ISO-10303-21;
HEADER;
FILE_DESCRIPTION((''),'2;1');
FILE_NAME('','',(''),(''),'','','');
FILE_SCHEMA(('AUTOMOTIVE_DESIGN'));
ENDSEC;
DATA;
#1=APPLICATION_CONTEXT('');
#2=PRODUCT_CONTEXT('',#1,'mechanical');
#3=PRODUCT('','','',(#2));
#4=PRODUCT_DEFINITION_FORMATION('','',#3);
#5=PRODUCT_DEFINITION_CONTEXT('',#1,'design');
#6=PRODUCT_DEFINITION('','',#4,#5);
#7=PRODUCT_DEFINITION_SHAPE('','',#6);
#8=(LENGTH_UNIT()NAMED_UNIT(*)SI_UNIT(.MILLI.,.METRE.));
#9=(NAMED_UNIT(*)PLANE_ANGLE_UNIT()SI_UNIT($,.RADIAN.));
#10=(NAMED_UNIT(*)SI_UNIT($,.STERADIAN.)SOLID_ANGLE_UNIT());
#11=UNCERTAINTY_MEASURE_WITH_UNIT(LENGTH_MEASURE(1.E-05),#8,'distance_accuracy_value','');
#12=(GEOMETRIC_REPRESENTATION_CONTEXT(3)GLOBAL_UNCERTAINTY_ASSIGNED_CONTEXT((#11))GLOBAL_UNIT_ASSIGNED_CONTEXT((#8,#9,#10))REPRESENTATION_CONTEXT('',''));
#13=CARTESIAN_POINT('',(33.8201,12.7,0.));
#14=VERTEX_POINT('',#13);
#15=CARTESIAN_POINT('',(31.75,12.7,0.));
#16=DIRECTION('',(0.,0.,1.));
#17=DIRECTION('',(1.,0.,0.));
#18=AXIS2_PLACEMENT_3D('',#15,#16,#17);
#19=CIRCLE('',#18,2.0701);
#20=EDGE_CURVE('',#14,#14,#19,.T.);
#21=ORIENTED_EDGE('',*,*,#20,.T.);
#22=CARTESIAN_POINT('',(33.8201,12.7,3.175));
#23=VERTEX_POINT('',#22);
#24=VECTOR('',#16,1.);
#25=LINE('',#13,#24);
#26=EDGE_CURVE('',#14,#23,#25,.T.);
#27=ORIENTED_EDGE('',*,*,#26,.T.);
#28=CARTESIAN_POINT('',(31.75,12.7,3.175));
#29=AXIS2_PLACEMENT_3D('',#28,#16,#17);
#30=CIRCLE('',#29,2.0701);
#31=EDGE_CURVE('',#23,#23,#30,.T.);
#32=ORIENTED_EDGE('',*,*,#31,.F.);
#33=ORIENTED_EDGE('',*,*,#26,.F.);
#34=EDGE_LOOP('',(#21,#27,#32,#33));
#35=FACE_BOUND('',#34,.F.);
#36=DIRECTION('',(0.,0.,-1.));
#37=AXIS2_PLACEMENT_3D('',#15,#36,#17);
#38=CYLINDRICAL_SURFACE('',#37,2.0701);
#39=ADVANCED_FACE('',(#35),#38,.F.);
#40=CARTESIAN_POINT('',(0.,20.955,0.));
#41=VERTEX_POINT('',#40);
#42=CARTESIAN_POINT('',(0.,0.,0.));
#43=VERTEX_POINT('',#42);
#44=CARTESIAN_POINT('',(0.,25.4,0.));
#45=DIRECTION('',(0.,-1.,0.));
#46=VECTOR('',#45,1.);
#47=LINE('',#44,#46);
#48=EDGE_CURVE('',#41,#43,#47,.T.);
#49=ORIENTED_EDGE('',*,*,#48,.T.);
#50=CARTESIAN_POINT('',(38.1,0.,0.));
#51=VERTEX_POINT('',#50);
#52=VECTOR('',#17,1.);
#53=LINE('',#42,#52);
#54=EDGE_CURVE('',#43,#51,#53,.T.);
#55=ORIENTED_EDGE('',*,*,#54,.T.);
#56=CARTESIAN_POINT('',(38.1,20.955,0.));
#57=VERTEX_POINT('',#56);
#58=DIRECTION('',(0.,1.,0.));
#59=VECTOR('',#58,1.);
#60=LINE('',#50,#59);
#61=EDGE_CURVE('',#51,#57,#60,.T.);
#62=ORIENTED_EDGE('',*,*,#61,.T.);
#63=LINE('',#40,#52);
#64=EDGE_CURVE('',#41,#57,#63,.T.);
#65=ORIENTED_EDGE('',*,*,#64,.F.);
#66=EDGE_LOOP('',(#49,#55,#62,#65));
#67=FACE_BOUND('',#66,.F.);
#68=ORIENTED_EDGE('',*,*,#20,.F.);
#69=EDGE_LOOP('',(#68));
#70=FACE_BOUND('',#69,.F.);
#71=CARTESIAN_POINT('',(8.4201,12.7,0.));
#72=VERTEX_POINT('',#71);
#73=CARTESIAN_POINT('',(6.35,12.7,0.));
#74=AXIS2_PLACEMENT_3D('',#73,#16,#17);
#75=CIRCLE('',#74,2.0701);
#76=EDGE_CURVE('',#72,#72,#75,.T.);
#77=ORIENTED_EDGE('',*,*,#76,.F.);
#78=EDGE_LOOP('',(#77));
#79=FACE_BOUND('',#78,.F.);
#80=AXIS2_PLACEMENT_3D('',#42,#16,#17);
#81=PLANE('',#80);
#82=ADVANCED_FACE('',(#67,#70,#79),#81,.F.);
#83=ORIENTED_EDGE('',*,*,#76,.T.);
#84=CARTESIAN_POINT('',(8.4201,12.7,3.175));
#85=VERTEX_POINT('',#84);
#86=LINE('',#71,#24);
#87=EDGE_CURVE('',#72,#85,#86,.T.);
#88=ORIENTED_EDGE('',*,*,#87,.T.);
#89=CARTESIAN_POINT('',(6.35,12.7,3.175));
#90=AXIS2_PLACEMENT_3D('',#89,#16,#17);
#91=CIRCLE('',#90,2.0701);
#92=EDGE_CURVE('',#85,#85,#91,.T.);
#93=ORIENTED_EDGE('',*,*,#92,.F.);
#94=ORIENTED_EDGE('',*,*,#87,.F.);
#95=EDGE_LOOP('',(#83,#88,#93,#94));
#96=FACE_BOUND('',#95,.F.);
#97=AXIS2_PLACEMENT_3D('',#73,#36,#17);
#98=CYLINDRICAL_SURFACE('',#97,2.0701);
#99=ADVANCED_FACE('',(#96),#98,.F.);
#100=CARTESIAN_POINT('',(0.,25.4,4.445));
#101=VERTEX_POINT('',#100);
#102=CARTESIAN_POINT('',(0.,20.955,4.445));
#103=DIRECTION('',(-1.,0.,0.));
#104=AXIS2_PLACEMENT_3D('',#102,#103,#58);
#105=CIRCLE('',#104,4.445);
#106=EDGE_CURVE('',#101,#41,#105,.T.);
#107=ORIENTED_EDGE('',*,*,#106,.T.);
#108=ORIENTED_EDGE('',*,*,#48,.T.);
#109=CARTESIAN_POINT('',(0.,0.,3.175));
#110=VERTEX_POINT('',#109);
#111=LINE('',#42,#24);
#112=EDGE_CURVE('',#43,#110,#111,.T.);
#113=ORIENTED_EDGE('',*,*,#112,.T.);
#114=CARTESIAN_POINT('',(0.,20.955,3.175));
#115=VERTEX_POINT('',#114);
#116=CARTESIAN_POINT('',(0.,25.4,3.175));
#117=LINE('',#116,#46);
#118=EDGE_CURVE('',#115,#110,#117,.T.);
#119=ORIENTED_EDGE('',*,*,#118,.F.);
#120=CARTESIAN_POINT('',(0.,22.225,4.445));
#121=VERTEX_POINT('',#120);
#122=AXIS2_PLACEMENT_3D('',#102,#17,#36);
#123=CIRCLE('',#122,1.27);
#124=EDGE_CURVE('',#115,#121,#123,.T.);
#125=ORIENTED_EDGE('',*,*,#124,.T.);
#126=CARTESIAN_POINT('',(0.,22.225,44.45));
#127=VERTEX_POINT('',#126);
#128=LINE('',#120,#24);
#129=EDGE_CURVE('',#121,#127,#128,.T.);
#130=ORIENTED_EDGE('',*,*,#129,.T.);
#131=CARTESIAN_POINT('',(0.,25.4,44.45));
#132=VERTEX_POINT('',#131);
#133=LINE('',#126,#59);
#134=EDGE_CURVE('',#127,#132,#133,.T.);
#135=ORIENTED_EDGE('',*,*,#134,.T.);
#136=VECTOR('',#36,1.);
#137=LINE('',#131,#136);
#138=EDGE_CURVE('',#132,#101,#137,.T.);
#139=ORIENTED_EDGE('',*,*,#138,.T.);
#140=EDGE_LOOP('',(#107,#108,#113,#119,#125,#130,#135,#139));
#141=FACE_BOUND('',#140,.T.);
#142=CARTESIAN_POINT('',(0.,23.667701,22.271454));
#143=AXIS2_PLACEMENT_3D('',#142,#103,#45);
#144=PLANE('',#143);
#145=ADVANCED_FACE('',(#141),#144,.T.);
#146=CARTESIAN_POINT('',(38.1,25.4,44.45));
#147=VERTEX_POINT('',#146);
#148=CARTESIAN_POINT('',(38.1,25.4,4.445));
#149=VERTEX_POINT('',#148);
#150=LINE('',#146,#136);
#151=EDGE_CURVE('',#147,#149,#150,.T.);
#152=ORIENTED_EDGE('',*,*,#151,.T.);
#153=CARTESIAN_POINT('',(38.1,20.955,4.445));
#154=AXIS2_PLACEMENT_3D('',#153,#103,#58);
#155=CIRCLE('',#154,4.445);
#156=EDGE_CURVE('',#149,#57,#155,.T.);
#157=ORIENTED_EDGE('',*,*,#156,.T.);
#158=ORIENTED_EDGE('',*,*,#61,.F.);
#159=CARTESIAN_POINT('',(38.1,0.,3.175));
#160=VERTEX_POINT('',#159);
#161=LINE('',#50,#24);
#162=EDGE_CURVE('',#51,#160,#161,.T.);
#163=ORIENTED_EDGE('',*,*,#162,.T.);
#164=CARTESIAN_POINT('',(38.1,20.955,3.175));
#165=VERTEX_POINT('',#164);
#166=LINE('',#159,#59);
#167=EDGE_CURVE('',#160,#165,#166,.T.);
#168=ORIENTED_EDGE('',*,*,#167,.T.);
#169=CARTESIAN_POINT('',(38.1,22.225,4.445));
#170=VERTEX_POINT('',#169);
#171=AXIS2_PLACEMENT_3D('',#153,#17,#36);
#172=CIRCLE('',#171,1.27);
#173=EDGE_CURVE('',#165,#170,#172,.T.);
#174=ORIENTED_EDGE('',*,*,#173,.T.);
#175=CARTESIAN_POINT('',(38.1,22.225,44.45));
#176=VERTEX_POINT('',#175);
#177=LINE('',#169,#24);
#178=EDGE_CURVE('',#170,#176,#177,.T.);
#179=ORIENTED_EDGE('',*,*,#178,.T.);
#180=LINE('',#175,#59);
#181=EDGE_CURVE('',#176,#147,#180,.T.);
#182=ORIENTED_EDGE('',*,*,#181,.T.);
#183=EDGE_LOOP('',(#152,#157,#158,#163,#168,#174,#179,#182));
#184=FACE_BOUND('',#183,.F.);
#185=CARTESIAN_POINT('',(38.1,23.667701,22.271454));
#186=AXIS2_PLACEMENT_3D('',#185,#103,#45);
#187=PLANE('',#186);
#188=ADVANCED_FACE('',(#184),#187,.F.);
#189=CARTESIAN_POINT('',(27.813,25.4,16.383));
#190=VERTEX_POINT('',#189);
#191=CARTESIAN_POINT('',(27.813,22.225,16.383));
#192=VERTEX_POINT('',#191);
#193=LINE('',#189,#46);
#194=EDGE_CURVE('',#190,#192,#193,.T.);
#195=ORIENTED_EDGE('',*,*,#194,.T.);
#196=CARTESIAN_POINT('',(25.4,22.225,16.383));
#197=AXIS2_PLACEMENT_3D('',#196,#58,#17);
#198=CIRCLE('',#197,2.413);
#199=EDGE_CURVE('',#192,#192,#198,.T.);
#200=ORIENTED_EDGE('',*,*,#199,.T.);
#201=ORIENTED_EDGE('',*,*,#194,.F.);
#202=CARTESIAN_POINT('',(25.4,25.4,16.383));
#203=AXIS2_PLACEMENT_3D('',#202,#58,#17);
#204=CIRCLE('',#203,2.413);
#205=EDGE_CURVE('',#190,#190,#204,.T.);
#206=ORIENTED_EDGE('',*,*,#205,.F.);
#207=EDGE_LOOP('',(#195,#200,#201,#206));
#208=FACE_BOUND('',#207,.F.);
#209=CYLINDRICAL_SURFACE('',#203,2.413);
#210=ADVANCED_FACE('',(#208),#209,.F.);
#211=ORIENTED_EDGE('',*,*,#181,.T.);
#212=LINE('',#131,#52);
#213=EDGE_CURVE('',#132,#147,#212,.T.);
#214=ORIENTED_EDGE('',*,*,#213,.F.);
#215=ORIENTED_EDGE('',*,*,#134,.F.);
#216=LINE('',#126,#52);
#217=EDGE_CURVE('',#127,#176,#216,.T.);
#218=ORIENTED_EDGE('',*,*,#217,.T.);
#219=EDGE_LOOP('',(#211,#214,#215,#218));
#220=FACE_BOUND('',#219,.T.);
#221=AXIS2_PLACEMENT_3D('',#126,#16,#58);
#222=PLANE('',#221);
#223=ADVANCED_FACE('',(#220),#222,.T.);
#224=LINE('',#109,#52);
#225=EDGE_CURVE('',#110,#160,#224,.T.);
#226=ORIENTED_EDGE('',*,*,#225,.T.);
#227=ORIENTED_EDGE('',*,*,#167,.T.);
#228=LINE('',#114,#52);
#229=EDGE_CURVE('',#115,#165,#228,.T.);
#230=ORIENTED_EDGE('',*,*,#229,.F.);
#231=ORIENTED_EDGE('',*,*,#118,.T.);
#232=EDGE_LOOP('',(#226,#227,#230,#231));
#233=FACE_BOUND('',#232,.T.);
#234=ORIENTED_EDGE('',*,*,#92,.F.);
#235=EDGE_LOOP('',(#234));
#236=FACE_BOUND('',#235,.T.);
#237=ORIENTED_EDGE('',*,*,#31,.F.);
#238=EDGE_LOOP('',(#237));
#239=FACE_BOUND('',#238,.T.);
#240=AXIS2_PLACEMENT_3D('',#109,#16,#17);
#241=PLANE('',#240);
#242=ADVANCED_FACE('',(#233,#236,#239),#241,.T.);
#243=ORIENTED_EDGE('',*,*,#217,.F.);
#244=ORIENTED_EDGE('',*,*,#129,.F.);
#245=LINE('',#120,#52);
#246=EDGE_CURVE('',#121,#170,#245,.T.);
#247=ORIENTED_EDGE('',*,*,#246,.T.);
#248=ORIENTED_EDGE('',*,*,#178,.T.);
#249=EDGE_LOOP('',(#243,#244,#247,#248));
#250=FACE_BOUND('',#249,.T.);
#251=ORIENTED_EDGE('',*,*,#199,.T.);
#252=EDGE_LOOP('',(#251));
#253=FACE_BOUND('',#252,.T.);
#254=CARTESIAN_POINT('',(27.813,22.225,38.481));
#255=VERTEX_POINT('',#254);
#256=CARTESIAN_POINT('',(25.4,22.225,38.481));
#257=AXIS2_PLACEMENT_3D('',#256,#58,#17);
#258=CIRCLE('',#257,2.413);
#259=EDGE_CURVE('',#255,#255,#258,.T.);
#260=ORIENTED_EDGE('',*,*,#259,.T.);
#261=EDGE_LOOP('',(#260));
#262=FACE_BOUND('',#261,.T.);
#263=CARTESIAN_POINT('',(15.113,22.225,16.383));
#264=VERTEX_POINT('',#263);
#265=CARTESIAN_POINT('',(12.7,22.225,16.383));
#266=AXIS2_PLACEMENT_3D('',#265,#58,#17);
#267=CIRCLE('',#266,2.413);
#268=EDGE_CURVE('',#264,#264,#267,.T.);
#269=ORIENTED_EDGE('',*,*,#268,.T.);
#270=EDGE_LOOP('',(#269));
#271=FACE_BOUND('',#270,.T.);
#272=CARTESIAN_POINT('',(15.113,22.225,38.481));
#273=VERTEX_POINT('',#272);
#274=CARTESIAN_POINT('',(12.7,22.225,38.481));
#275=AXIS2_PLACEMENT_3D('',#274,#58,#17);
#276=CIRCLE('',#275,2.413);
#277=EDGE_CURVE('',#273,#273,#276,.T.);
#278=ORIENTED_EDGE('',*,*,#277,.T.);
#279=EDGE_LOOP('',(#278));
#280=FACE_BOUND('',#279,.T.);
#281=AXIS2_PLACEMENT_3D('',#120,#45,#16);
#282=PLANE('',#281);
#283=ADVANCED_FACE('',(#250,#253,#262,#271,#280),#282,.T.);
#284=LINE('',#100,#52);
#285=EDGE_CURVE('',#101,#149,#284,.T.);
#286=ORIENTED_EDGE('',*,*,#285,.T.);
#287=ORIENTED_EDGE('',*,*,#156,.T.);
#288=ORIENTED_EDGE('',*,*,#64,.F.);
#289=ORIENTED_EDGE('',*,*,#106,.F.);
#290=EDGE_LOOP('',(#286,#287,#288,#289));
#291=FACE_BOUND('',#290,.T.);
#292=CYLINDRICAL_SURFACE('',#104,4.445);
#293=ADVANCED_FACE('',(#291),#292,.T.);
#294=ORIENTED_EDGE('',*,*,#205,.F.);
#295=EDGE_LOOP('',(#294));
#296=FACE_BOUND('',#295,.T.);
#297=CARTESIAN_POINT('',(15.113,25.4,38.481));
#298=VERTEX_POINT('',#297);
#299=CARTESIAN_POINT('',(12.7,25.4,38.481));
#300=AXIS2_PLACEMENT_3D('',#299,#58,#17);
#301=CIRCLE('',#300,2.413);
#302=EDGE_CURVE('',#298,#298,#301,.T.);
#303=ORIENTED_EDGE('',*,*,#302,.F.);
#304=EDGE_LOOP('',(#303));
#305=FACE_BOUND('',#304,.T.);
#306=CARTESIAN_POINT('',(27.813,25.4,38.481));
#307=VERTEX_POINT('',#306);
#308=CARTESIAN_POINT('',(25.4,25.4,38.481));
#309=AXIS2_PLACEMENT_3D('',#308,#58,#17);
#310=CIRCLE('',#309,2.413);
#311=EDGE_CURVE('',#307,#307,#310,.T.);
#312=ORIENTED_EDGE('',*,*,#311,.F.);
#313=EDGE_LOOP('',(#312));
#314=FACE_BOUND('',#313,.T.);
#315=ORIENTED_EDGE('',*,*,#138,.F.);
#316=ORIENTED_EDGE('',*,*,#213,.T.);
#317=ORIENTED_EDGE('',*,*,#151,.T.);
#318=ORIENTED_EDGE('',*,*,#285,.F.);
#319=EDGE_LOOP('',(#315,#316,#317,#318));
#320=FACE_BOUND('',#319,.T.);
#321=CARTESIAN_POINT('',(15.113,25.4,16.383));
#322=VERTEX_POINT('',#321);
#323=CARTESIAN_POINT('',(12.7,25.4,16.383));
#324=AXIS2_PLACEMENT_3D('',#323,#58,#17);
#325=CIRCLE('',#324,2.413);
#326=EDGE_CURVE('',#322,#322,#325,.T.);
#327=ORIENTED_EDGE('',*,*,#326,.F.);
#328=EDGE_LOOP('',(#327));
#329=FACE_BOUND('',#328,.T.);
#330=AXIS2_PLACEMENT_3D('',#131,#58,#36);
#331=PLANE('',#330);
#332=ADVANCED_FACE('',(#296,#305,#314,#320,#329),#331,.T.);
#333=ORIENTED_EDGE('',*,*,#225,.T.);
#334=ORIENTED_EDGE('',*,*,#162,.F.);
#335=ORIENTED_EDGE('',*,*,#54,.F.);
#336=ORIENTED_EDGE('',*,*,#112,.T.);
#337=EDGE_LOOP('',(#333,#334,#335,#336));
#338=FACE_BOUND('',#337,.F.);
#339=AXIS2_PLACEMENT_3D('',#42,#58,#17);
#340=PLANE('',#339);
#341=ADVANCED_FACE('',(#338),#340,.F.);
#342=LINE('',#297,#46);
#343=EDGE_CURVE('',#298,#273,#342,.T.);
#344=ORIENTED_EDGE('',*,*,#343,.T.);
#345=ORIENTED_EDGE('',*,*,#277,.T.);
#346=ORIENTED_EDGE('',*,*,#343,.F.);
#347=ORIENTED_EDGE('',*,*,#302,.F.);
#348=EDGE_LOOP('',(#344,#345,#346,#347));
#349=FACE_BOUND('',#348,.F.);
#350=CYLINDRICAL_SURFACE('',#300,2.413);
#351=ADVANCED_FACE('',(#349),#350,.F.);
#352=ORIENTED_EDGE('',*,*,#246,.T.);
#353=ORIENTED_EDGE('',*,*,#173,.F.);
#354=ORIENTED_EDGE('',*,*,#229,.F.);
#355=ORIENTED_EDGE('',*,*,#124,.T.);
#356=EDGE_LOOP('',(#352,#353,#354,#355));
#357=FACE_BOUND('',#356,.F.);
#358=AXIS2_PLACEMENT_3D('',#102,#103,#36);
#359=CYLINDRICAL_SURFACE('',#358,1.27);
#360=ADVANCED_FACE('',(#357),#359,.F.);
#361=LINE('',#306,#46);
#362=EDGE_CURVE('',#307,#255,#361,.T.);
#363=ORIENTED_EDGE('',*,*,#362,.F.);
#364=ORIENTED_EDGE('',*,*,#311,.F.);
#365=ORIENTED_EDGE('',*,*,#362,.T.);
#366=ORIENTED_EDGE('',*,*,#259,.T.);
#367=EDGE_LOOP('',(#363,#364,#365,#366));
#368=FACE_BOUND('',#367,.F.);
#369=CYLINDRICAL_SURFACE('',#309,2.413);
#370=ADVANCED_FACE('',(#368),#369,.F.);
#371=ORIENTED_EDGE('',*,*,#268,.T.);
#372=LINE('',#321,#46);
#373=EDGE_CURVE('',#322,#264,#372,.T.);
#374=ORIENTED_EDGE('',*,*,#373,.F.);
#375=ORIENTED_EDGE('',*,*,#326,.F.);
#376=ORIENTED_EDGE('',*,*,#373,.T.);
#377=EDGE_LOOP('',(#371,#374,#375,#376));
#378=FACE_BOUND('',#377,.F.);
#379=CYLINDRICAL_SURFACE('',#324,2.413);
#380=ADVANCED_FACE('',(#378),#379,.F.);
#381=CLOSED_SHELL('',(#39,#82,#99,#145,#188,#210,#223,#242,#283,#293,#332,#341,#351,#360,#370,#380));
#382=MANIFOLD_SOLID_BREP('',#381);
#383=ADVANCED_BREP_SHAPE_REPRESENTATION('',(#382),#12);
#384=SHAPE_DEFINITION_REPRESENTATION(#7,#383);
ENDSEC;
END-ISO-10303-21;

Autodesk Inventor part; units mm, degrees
ref_plane "YZ Plane" through (0, 0, 0) normal (1, 0, 0) x (0, 1, 0)
ref_plane "XZ Plane" through (0, 0, 0) normal (0, 1, 0) x (-1, 0, 0)
ref_plane "XY Plane" through (0, 0, 0) normal (0, 0, 1) x (1, 0, 0)
sketch "Sketch1" plane through (0, 0, 0) normal (0, 0, 1) x (1, 0, 0)
  line L0 (0, 0) -> (38.1, 0)
  line L1 (38.1, 0) -> (38.1, 25.4)
  line L2 (38.1, 25.4) -> (0, 25.4)
  line L3 (0, 25.4) -> (0, 0)
  circle A0 centre (6.35, 12.7) radius 2.0701
  circle A1 centre (31.75, 12.7) radius 2.0701
  dimension "d0" = 38.1
  dimension "d1" = 25.4
  dimension "d2" = 4.1402
  dimension "d3" = 12.7
  dimension "d4" = 6.35
  dimension "d7" = 25.4
extrude "Plate1" add sketch "Sketch1" along normal blind 3.175
sketch "Sketch2" plane through (0, 22.225, 0) normal (0, 1, 0) x (-1, 0, 0)
  line L0 (-38.1, 0) -> (0, 0)
  line L1 (0, 0) -> (0, 44.45)
  line L2 (0, 44.45) -> (-38.1, 44.45)
  line L3 (-38.1, 44.45) -> (-38.1, 0)
edge flange "Flange1" height 44.45 angle 90 thickness 3.175 bend radius 1.27 thickness toward (0, 1, 0) relief tear relief width 3.175 relief depth 1.5875 edges at (19.05, 25.4, 3.175) wall of the first edge with corners at (38.1, 22.225, 0) (0, 22.225, 0) (0, 22.225, 44.45) (38.1, 22.225, 44.45)
bend "Bend1"
corner "Corner1"
sketch "Sketch3" plane through (0, 25.4, 44.45) normal (0, 1, 0) x (1, 0, 0)
  line L0 (38.1, 40.005) -> (0, 40.005) projected
  line L1 (38.1, 40.005) -> (38.1, 0) projected
  line L2 (28.575, 33.655) -> (9.525, 33.655) construction
  line L3 (9.525, 33.655) -> (9.525, 0.381) construction
  line L4 (9.525, 0.381) -> (28.575, 0.381) construction
  line L5 (28.575, 0.381) -> (28.575, 33.655) construction
  line L6 (28.575, 5.969) -> (9.525, 5.969) construction
  circle A0 centre (25.4, 5.969) radius 2.413
  line L7 (19.05, 0.381) -> (19.05, 33.655) construction
  circle A1 centre (12.7, 5.969) radius 2.413
  line L8 (28.575, 17.018) -> (9.525, 17.018) construction
  circle A2 centre (25.4, 28.067) radius 2.413
  circle A3 centre (12.7, 28.067) radius 2.413
  point P0 (0, 44.45)
  dimension "d23" = 19.05
  dimension "d24" = 33.274
  dimension "d25" = 5.588
  dimension "d26" = 3.175
  dimension "d27" = 4.826
  dimension "d28" = 9.525
  dimension "d29" = 6.35
extrude "Cut1" cut sketch "Sketch3" against normal blind 3.175
equation "\"d28\" = -0.5 * d23 + 0.5 * d0"
equation "\"d30\" = Thickness"
equation "\"d13\" = BendReliefWidth"
equation "\"d14\" = BendReliefDepth"
equation "\"d15\" = MinimumRemnant"
equation "\"d16\" = BendRadius"
equation "\"d20\" = CornerReliefSize"
equation "\"d21\" = GapSize"
equation "\"d22\" = JacobiRadiusSize"
equation "\"BendRadius\" = Thickness"
equation "\"BendReliefWidth\" = Thickness"
equation "\"BendReliefDepth\" = 0.5 * Thickness"
equation "\"CornerReliefSize\" = 4 * Thickness"
equation "\"MinimumRemnant\" = 2 * Thickness"
equation "\"TransitionRadius\" = BendRadius"
equation "\"JacobiRadiusSize\" = BendRadius"
equation "\"GapSize\" = Thickness"
equation "\"d12\" = BendRadius"
equation "\"Thickness\" = 3.175"
properties part number "Pneumatic Piston Back Flange (Custom)" material "Aluminum 6061"
